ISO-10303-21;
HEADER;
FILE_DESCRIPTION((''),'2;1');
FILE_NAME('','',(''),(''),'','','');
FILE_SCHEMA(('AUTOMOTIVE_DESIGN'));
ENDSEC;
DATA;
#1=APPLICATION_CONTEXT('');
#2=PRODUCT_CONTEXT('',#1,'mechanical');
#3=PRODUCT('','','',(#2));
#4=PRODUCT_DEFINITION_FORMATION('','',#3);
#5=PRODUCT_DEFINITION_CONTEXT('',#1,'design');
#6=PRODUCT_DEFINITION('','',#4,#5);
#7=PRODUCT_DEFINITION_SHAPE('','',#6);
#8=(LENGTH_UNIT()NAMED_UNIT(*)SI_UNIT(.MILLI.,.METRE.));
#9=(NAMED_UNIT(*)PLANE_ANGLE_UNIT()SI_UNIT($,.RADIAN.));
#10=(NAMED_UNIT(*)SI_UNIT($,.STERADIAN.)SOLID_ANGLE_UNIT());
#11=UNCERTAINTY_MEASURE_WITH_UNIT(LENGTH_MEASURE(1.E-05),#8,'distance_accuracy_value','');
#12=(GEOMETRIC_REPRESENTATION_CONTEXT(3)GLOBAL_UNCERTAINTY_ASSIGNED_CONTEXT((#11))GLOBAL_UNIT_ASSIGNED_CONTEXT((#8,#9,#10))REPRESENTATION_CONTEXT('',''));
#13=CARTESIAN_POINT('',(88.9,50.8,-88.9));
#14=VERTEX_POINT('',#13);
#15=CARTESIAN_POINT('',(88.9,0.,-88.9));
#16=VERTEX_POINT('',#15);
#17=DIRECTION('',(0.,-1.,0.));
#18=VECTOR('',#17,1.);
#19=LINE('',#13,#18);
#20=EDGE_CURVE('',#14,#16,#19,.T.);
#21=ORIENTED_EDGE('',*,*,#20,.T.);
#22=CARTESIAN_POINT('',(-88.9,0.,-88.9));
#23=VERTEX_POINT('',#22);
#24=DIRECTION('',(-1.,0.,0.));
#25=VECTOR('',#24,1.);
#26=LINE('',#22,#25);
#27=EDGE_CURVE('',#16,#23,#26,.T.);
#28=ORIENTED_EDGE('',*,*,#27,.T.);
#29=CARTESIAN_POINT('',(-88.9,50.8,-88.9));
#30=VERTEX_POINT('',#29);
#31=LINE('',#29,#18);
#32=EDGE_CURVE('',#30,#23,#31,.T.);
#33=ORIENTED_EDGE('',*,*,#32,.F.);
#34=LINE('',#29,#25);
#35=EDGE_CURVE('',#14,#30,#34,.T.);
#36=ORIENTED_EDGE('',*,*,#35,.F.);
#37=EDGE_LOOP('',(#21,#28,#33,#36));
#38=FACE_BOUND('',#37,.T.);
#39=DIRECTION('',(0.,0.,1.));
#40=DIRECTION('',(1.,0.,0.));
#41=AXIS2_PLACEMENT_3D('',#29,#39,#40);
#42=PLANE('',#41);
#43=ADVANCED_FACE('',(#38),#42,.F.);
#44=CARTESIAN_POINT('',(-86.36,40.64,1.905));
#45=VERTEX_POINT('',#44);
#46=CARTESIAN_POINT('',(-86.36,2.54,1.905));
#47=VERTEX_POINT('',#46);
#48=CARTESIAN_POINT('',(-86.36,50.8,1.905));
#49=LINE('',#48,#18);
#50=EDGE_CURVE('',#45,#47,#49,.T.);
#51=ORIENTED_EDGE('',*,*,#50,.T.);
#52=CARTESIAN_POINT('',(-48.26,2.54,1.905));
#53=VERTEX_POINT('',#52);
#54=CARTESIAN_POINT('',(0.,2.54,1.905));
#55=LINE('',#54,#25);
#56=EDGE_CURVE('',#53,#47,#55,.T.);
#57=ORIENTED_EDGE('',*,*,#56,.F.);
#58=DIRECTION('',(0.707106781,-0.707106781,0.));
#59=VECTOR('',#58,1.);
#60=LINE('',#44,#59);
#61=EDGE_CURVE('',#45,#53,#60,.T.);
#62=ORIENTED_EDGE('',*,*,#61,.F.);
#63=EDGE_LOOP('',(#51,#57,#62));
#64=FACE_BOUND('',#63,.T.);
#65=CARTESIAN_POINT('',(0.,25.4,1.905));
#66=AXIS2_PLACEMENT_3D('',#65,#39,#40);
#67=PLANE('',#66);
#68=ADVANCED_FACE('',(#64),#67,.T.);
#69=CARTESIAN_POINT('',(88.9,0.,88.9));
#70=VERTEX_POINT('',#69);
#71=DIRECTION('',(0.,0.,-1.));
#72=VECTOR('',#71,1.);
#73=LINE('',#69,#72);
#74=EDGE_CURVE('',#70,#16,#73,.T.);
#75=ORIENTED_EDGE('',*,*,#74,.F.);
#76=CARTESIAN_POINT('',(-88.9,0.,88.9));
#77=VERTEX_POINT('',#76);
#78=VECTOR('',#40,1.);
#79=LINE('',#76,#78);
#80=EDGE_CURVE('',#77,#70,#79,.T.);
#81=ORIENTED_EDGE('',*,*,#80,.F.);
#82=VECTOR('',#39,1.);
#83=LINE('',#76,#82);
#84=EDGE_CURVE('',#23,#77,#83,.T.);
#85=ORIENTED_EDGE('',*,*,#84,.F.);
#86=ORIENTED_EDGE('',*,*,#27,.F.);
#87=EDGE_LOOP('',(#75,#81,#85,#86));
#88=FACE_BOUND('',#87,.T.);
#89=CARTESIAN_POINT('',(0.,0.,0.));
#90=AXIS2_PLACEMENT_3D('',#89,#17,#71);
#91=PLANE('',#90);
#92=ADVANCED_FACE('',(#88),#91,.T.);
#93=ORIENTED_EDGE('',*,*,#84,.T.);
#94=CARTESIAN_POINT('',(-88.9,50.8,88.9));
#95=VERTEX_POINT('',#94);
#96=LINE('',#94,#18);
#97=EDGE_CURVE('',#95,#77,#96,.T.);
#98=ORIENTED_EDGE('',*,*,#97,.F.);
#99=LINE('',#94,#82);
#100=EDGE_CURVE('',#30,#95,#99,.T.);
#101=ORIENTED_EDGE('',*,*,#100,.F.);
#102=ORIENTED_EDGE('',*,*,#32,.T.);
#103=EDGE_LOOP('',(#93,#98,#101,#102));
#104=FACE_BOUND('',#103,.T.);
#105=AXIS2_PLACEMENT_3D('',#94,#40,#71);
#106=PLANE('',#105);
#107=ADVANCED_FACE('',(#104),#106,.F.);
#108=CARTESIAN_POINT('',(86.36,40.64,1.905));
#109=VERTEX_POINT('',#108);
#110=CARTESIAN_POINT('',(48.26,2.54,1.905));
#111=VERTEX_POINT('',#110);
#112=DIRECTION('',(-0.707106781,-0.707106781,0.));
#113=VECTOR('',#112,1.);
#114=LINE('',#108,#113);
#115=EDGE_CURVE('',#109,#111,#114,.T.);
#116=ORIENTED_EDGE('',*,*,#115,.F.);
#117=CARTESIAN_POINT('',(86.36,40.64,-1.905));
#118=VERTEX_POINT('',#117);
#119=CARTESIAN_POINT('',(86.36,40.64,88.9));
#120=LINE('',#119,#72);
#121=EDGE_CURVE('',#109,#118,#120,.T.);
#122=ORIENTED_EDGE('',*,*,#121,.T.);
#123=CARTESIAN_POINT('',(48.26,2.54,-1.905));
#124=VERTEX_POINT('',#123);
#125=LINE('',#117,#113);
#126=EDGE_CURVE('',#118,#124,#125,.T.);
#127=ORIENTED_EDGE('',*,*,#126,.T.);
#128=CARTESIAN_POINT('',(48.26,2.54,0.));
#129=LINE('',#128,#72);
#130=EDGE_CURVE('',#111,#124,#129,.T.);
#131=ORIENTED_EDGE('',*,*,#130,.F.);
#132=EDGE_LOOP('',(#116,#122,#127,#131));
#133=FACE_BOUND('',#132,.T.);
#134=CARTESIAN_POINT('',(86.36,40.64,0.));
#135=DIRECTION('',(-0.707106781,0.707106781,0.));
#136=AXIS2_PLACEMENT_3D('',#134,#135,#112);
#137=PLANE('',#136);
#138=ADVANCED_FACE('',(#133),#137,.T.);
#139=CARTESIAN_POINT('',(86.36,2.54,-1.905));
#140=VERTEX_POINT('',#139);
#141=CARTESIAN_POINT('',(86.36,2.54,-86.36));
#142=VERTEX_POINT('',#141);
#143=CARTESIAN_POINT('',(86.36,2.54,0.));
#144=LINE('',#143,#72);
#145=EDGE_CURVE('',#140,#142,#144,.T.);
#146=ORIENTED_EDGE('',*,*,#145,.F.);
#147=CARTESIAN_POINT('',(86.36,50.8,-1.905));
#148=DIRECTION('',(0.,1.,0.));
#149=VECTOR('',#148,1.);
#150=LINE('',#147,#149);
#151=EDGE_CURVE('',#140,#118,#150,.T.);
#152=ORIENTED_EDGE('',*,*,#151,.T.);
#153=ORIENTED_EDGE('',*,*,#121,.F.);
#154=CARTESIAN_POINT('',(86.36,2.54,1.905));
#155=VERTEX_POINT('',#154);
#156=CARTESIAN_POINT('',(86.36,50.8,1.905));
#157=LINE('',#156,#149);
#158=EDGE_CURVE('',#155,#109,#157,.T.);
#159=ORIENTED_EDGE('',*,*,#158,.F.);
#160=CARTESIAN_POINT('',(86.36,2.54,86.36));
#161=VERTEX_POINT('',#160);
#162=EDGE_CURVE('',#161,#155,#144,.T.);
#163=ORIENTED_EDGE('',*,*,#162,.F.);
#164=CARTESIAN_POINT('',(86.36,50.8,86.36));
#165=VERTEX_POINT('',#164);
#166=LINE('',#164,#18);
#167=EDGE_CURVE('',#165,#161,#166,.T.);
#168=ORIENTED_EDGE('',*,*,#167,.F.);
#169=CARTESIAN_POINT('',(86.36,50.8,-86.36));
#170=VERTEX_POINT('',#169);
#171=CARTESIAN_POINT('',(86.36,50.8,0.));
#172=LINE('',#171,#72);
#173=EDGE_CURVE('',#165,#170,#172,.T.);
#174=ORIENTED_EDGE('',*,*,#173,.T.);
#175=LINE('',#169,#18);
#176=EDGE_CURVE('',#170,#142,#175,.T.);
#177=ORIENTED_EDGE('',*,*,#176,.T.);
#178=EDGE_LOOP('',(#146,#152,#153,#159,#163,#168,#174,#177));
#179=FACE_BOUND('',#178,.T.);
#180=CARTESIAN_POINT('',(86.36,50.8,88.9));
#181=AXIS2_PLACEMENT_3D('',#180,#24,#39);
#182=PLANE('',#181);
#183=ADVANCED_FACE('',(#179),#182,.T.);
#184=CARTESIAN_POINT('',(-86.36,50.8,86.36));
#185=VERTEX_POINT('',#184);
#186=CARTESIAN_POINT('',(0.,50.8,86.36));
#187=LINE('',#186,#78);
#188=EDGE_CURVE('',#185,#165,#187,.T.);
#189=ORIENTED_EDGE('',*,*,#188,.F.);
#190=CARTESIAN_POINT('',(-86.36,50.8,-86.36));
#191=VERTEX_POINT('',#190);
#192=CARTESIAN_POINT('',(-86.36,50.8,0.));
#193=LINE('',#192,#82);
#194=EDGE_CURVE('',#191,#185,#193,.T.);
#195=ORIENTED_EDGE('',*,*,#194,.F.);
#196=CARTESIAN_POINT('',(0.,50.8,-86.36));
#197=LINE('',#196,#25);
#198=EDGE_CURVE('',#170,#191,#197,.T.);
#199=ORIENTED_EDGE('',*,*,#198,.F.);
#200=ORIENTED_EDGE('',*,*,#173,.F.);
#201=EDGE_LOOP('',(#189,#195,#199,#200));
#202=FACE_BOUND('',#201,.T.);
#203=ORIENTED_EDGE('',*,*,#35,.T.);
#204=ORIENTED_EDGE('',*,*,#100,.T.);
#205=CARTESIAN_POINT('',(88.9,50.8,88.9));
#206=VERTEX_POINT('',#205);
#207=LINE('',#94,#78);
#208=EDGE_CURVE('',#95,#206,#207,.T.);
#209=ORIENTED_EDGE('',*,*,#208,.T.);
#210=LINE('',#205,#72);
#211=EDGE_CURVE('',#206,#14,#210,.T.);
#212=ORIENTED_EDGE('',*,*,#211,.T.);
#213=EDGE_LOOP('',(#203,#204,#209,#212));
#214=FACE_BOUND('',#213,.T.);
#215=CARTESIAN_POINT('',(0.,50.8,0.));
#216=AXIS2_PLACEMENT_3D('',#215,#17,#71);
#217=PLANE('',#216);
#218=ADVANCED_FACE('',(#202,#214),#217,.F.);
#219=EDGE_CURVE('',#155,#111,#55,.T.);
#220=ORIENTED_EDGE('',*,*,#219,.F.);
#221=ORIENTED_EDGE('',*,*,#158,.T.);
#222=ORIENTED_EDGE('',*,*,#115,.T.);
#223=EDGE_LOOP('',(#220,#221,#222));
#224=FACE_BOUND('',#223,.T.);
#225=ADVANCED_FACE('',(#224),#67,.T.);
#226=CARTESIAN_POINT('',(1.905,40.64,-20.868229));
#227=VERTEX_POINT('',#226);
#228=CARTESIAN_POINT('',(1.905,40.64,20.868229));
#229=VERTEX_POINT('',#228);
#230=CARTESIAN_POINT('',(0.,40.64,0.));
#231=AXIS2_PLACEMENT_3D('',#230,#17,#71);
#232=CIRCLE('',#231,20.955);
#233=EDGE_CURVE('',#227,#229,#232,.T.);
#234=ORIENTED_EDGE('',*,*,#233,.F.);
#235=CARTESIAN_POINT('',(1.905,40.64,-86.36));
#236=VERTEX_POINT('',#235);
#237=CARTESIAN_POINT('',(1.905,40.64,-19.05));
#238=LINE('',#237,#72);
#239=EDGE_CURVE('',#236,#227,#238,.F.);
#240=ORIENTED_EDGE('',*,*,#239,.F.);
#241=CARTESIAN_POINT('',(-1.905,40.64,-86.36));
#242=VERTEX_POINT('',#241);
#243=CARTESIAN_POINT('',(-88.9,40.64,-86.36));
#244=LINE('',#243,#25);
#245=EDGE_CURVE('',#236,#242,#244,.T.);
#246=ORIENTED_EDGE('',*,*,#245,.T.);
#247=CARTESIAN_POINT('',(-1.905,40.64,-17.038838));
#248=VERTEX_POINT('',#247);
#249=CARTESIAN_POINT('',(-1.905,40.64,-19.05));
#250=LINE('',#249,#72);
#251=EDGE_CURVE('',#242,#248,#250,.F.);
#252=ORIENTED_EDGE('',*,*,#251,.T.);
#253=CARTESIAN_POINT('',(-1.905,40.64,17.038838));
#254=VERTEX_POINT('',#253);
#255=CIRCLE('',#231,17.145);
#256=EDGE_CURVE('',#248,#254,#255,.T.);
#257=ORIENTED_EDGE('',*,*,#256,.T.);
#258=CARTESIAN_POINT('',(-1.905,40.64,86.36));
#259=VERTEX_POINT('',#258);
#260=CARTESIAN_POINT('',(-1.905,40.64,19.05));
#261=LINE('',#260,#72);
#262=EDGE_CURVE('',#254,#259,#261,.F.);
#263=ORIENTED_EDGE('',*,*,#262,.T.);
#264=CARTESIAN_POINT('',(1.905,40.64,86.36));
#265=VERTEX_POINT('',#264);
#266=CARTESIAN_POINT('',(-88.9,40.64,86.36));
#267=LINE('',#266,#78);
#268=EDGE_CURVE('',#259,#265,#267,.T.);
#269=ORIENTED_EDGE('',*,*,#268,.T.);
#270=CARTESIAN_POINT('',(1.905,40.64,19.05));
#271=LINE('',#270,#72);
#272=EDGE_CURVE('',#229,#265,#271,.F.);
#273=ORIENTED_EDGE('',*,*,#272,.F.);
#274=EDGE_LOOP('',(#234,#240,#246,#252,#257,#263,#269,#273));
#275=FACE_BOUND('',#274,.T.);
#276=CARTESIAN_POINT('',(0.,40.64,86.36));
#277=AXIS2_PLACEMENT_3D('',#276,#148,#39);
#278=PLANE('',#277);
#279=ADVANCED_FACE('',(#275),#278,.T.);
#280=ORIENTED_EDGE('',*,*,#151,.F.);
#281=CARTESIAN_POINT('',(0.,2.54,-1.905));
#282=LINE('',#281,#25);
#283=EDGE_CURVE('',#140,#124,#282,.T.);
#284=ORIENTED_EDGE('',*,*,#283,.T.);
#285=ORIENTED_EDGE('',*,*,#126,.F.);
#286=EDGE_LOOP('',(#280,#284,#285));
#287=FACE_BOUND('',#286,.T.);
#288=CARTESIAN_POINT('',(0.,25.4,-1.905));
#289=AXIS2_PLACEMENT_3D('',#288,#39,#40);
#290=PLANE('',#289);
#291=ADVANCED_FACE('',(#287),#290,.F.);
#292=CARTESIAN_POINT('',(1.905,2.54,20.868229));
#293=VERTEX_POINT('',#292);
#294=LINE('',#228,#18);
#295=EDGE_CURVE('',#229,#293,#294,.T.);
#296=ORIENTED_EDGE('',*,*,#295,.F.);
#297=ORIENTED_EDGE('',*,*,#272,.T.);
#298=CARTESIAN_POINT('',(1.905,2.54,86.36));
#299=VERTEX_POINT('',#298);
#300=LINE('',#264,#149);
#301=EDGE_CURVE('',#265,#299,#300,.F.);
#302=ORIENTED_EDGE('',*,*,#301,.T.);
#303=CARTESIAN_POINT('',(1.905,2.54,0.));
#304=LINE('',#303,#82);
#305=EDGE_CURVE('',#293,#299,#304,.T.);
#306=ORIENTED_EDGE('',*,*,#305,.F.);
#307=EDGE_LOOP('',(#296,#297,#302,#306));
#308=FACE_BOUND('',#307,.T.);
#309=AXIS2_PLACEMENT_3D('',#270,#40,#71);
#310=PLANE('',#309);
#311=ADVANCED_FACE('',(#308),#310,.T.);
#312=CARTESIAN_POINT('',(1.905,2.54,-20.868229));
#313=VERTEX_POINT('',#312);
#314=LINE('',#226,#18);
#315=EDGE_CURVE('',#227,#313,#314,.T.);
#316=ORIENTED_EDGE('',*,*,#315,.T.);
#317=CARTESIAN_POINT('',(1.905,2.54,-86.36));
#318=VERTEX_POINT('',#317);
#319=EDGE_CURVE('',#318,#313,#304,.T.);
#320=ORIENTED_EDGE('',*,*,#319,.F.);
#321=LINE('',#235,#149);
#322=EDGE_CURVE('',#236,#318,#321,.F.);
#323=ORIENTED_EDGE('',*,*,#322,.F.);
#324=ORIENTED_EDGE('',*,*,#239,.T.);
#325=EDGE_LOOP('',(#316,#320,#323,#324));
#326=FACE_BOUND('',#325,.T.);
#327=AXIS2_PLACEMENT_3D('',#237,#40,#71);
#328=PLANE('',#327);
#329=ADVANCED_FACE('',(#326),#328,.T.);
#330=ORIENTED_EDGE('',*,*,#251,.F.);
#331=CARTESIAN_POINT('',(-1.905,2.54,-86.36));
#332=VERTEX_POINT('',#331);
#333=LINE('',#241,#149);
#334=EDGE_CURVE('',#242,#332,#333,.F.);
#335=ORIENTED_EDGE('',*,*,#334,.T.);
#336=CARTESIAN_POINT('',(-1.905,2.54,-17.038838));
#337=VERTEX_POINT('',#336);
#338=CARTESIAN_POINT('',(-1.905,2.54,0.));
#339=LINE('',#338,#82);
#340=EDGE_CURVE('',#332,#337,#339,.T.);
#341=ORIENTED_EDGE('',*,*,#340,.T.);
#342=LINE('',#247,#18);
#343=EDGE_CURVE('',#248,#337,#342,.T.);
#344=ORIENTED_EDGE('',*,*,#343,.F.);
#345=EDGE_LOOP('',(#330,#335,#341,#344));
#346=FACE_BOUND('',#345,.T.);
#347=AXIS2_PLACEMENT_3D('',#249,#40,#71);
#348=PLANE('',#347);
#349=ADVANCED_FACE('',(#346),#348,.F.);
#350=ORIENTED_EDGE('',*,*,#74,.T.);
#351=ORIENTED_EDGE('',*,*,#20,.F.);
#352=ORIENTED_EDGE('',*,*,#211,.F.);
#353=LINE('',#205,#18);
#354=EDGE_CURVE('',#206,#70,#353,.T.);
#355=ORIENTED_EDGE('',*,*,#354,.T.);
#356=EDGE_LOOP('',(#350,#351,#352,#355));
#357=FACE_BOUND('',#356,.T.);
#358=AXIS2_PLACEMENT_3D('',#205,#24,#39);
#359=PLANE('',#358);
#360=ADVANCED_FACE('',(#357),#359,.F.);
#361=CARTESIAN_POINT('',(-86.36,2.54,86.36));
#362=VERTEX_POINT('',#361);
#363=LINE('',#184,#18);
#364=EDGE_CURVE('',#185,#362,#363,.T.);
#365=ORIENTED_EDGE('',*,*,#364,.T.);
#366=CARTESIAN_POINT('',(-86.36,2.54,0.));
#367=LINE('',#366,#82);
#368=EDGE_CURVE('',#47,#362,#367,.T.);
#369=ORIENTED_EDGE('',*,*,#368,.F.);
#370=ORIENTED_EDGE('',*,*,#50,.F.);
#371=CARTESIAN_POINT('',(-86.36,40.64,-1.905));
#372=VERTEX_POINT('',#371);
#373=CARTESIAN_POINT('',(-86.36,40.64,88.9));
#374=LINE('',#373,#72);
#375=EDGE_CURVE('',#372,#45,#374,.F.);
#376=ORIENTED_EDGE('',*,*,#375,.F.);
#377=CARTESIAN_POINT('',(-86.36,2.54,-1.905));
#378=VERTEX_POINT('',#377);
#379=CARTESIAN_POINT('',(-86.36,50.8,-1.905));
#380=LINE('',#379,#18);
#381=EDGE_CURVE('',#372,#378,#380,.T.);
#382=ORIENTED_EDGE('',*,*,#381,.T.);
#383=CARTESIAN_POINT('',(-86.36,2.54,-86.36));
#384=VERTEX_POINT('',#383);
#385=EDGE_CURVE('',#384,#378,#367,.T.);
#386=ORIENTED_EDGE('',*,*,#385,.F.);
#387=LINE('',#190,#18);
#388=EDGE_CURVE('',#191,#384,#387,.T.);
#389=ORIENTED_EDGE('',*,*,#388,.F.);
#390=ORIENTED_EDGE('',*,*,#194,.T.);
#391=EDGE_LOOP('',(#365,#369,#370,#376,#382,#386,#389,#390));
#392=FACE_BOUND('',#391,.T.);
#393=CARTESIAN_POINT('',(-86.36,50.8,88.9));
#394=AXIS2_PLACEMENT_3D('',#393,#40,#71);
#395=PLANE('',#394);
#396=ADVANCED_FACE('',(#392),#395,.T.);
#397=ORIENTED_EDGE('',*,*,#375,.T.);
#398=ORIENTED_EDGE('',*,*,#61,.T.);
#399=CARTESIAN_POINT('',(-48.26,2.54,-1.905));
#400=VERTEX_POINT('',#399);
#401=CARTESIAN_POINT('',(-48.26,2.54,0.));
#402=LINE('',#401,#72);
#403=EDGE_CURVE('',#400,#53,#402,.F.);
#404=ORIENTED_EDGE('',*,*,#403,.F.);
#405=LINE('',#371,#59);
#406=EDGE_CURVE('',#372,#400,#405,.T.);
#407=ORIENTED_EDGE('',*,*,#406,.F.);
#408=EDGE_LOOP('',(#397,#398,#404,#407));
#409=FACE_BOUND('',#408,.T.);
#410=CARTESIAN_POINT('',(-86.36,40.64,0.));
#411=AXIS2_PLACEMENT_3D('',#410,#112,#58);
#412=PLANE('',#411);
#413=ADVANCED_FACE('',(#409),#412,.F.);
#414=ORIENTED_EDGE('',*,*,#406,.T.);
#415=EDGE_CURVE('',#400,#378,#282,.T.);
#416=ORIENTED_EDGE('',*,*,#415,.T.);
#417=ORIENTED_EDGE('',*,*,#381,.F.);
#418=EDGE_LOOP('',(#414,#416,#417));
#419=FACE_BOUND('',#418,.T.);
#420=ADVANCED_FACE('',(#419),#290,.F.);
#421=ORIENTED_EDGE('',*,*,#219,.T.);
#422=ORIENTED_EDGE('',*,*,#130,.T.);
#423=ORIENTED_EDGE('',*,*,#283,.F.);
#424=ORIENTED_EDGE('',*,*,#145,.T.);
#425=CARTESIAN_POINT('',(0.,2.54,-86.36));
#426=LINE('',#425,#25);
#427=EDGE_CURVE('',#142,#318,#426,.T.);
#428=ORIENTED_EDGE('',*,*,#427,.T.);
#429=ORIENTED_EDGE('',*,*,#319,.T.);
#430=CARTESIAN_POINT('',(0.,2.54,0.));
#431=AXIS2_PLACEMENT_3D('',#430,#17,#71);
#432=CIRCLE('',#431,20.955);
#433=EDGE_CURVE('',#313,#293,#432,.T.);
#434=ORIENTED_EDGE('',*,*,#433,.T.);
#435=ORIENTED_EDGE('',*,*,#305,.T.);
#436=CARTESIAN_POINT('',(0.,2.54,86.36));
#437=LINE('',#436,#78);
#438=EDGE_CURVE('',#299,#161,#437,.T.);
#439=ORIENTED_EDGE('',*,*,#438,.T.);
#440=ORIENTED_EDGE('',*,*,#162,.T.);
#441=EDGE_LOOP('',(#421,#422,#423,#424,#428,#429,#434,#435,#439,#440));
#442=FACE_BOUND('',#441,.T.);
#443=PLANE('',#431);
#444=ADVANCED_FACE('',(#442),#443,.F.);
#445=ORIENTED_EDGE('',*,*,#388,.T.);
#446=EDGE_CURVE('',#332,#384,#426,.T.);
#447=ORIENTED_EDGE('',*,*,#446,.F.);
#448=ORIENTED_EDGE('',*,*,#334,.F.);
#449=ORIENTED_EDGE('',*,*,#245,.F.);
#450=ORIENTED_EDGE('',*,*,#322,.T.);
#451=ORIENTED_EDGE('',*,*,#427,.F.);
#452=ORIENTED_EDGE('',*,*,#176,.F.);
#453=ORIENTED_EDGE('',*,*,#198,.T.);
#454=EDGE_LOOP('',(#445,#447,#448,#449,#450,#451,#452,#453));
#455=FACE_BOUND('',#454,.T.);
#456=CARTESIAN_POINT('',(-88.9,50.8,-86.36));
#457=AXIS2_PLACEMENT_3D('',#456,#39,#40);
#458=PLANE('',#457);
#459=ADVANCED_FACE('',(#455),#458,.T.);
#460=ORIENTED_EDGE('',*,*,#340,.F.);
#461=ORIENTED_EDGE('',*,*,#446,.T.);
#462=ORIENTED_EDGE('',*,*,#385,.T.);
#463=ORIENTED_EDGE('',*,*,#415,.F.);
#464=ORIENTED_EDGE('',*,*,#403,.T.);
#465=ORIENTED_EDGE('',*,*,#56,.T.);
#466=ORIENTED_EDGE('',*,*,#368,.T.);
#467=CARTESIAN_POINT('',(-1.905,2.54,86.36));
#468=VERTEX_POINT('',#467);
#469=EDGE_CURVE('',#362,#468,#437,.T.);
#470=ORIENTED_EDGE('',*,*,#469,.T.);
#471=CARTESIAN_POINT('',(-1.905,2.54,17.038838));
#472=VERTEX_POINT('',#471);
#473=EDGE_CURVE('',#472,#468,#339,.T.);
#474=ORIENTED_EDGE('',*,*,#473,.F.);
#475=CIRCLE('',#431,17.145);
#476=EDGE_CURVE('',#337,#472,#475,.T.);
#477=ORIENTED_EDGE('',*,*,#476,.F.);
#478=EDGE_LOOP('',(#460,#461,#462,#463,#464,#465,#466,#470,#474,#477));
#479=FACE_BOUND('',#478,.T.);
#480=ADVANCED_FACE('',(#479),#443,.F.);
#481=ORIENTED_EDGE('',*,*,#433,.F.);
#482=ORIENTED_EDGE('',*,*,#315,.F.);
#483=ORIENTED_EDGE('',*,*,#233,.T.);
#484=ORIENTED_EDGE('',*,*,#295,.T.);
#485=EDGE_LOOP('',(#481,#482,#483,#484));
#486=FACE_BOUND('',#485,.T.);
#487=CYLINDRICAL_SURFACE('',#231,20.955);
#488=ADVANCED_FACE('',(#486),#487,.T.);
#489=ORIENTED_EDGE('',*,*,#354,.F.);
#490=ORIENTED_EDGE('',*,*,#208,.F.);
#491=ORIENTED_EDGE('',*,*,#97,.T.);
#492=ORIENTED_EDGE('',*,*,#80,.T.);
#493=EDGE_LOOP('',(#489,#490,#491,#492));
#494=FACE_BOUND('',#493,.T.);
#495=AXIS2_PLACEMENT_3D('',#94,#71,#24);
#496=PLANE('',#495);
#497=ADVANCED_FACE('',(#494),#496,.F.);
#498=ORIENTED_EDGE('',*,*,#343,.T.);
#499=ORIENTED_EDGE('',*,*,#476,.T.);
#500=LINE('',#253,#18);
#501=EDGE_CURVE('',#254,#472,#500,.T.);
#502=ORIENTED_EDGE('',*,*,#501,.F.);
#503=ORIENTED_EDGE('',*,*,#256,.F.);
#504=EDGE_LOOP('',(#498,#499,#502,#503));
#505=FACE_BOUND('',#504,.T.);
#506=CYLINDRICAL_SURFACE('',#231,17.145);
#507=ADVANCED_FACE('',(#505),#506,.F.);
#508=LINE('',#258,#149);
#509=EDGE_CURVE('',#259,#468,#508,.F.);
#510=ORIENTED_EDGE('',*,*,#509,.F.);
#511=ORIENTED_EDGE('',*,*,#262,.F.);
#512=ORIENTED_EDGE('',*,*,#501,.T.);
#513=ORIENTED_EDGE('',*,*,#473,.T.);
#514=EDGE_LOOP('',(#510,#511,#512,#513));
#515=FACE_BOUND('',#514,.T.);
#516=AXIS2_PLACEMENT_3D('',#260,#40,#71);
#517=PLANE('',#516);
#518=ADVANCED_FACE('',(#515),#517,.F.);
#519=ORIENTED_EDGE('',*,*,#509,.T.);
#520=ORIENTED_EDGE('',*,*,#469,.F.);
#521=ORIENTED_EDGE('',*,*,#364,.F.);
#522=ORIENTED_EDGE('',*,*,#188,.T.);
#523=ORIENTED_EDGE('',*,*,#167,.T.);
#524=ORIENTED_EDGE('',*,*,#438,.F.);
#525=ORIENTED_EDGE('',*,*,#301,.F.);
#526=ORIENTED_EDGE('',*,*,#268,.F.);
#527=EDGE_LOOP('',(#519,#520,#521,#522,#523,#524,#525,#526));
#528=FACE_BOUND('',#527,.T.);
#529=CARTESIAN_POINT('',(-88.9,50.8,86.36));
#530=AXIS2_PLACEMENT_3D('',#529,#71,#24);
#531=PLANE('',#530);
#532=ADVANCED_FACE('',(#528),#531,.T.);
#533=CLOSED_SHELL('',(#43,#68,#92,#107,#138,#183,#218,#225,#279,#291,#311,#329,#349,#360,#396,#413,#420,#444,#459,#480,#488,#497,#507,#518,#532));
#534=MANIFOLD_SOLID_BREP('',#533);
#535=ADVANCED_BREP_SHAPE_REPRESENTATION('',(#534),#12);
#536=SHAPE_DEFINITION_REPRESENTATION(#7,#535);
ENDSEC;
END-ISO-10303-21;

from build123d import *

# Parameters (mm, degrees)
SKETCH1_W           = 177.8
SKETCH1_H           = 177.8
BOSS_EXTRUDE1_DEPTH = 50.8
SHELL1_T            = -2.54
RIB2_REACH          = 137.599
SKETCH2_WALL_W      = 327.079324328
SKETCH2_WALL_H      = 3.81
RIB3_REACH          = 134.129


with BuildPart() as part:
    # Sketch1 → Boss-Extrude1 (new body)
    with BuildSketch(Plane(origin=(0, 0, 0), x_dir=(1, 0, 0), z_dir=(0, 1, 0))):
        Rectangle(SKETCH1_W, SKETCH1_H)
    extrude(amount=BOSS_EXTRUDE1_DEPTH)

    # Shell1
    shell1_openings = [part.faces().sort_by_distance(p)[0] for p in [
        (0, 50.8, 0),
    ]]
    offset(amount=SHELL1_T, openings=shell1_openings, kind=Kind.INTERSECTION)

    # Sketch2 wall → Rib2 (add, up to next)
    with BuildSketch(Plane(origin=(-67.31, 21.59, 0), x_dir=(0.707106781187, -0.707106781187, 0), z_dir=(0.707106781187, 0.707106781187, 0)), mode=Mode.PRIVATE) as rib2_sk1:
        Rectangle(SKETCH2_WALL_W, SKETCH2_WALL_H)
    rib2_tool1 = extrude(rib2_sk1.sketch, amount=-RIB2_REACH, mode=Mode.PRIVATE) - part.part
    rib2 = rib2_tool1.solids().sort_by_distance((-67.31, 21.59, 0))[0]
    add(rib2)

    # Mirror1: Rib2 across plane
    add(rib2.mirror(Plane(origin=(0, 0, 0), x_dir=(0, 0, 1), z_dir=(1, 0, 0))))

    # Sketch3 walls → Rib3 (add, up to next)
    with BuildSketch(Plane(origin=(0, 40.64, 0), x_dir=(1, 0, 0), z_dir=(0, 1, 0)), mode=Mode.PRIVATE) as rib3_sk1:
        with BuildLine():
            Line((1.905, -219.488837125), (1.905, -20.868229441))
            ThreePointArc((1.905, -20.868229441), (20.955, 0), (1.905, 20.868229441))
            Line((1.905, 20.868229441), (1.905, 219.488837125))
            Line((1.905, 219.488837125), (-1.905, 219.488837125))
            Line((-1.905, 219.488837125), (-1.905, 17.038837989))
            ThreePointArc((-1.905, 17.038837989), (17.145, 0), (-1.905, -17.038837989))
            Line((-1.905, -17.038837989), (-1.905, -219.488837125))
            Line((-1.905, -219.488837125), (1.905, -219.488837125))
        make_face()
    rib3_tool1 = extrude(rib3_sk1.sketch, amount=-RIB3_REACH, mode=Mode.PRIVATE) - part.part
    add(rib3_tool1.solids().sort_by_distance((19.05, 40.64, 0))[0])


solid = part.part
